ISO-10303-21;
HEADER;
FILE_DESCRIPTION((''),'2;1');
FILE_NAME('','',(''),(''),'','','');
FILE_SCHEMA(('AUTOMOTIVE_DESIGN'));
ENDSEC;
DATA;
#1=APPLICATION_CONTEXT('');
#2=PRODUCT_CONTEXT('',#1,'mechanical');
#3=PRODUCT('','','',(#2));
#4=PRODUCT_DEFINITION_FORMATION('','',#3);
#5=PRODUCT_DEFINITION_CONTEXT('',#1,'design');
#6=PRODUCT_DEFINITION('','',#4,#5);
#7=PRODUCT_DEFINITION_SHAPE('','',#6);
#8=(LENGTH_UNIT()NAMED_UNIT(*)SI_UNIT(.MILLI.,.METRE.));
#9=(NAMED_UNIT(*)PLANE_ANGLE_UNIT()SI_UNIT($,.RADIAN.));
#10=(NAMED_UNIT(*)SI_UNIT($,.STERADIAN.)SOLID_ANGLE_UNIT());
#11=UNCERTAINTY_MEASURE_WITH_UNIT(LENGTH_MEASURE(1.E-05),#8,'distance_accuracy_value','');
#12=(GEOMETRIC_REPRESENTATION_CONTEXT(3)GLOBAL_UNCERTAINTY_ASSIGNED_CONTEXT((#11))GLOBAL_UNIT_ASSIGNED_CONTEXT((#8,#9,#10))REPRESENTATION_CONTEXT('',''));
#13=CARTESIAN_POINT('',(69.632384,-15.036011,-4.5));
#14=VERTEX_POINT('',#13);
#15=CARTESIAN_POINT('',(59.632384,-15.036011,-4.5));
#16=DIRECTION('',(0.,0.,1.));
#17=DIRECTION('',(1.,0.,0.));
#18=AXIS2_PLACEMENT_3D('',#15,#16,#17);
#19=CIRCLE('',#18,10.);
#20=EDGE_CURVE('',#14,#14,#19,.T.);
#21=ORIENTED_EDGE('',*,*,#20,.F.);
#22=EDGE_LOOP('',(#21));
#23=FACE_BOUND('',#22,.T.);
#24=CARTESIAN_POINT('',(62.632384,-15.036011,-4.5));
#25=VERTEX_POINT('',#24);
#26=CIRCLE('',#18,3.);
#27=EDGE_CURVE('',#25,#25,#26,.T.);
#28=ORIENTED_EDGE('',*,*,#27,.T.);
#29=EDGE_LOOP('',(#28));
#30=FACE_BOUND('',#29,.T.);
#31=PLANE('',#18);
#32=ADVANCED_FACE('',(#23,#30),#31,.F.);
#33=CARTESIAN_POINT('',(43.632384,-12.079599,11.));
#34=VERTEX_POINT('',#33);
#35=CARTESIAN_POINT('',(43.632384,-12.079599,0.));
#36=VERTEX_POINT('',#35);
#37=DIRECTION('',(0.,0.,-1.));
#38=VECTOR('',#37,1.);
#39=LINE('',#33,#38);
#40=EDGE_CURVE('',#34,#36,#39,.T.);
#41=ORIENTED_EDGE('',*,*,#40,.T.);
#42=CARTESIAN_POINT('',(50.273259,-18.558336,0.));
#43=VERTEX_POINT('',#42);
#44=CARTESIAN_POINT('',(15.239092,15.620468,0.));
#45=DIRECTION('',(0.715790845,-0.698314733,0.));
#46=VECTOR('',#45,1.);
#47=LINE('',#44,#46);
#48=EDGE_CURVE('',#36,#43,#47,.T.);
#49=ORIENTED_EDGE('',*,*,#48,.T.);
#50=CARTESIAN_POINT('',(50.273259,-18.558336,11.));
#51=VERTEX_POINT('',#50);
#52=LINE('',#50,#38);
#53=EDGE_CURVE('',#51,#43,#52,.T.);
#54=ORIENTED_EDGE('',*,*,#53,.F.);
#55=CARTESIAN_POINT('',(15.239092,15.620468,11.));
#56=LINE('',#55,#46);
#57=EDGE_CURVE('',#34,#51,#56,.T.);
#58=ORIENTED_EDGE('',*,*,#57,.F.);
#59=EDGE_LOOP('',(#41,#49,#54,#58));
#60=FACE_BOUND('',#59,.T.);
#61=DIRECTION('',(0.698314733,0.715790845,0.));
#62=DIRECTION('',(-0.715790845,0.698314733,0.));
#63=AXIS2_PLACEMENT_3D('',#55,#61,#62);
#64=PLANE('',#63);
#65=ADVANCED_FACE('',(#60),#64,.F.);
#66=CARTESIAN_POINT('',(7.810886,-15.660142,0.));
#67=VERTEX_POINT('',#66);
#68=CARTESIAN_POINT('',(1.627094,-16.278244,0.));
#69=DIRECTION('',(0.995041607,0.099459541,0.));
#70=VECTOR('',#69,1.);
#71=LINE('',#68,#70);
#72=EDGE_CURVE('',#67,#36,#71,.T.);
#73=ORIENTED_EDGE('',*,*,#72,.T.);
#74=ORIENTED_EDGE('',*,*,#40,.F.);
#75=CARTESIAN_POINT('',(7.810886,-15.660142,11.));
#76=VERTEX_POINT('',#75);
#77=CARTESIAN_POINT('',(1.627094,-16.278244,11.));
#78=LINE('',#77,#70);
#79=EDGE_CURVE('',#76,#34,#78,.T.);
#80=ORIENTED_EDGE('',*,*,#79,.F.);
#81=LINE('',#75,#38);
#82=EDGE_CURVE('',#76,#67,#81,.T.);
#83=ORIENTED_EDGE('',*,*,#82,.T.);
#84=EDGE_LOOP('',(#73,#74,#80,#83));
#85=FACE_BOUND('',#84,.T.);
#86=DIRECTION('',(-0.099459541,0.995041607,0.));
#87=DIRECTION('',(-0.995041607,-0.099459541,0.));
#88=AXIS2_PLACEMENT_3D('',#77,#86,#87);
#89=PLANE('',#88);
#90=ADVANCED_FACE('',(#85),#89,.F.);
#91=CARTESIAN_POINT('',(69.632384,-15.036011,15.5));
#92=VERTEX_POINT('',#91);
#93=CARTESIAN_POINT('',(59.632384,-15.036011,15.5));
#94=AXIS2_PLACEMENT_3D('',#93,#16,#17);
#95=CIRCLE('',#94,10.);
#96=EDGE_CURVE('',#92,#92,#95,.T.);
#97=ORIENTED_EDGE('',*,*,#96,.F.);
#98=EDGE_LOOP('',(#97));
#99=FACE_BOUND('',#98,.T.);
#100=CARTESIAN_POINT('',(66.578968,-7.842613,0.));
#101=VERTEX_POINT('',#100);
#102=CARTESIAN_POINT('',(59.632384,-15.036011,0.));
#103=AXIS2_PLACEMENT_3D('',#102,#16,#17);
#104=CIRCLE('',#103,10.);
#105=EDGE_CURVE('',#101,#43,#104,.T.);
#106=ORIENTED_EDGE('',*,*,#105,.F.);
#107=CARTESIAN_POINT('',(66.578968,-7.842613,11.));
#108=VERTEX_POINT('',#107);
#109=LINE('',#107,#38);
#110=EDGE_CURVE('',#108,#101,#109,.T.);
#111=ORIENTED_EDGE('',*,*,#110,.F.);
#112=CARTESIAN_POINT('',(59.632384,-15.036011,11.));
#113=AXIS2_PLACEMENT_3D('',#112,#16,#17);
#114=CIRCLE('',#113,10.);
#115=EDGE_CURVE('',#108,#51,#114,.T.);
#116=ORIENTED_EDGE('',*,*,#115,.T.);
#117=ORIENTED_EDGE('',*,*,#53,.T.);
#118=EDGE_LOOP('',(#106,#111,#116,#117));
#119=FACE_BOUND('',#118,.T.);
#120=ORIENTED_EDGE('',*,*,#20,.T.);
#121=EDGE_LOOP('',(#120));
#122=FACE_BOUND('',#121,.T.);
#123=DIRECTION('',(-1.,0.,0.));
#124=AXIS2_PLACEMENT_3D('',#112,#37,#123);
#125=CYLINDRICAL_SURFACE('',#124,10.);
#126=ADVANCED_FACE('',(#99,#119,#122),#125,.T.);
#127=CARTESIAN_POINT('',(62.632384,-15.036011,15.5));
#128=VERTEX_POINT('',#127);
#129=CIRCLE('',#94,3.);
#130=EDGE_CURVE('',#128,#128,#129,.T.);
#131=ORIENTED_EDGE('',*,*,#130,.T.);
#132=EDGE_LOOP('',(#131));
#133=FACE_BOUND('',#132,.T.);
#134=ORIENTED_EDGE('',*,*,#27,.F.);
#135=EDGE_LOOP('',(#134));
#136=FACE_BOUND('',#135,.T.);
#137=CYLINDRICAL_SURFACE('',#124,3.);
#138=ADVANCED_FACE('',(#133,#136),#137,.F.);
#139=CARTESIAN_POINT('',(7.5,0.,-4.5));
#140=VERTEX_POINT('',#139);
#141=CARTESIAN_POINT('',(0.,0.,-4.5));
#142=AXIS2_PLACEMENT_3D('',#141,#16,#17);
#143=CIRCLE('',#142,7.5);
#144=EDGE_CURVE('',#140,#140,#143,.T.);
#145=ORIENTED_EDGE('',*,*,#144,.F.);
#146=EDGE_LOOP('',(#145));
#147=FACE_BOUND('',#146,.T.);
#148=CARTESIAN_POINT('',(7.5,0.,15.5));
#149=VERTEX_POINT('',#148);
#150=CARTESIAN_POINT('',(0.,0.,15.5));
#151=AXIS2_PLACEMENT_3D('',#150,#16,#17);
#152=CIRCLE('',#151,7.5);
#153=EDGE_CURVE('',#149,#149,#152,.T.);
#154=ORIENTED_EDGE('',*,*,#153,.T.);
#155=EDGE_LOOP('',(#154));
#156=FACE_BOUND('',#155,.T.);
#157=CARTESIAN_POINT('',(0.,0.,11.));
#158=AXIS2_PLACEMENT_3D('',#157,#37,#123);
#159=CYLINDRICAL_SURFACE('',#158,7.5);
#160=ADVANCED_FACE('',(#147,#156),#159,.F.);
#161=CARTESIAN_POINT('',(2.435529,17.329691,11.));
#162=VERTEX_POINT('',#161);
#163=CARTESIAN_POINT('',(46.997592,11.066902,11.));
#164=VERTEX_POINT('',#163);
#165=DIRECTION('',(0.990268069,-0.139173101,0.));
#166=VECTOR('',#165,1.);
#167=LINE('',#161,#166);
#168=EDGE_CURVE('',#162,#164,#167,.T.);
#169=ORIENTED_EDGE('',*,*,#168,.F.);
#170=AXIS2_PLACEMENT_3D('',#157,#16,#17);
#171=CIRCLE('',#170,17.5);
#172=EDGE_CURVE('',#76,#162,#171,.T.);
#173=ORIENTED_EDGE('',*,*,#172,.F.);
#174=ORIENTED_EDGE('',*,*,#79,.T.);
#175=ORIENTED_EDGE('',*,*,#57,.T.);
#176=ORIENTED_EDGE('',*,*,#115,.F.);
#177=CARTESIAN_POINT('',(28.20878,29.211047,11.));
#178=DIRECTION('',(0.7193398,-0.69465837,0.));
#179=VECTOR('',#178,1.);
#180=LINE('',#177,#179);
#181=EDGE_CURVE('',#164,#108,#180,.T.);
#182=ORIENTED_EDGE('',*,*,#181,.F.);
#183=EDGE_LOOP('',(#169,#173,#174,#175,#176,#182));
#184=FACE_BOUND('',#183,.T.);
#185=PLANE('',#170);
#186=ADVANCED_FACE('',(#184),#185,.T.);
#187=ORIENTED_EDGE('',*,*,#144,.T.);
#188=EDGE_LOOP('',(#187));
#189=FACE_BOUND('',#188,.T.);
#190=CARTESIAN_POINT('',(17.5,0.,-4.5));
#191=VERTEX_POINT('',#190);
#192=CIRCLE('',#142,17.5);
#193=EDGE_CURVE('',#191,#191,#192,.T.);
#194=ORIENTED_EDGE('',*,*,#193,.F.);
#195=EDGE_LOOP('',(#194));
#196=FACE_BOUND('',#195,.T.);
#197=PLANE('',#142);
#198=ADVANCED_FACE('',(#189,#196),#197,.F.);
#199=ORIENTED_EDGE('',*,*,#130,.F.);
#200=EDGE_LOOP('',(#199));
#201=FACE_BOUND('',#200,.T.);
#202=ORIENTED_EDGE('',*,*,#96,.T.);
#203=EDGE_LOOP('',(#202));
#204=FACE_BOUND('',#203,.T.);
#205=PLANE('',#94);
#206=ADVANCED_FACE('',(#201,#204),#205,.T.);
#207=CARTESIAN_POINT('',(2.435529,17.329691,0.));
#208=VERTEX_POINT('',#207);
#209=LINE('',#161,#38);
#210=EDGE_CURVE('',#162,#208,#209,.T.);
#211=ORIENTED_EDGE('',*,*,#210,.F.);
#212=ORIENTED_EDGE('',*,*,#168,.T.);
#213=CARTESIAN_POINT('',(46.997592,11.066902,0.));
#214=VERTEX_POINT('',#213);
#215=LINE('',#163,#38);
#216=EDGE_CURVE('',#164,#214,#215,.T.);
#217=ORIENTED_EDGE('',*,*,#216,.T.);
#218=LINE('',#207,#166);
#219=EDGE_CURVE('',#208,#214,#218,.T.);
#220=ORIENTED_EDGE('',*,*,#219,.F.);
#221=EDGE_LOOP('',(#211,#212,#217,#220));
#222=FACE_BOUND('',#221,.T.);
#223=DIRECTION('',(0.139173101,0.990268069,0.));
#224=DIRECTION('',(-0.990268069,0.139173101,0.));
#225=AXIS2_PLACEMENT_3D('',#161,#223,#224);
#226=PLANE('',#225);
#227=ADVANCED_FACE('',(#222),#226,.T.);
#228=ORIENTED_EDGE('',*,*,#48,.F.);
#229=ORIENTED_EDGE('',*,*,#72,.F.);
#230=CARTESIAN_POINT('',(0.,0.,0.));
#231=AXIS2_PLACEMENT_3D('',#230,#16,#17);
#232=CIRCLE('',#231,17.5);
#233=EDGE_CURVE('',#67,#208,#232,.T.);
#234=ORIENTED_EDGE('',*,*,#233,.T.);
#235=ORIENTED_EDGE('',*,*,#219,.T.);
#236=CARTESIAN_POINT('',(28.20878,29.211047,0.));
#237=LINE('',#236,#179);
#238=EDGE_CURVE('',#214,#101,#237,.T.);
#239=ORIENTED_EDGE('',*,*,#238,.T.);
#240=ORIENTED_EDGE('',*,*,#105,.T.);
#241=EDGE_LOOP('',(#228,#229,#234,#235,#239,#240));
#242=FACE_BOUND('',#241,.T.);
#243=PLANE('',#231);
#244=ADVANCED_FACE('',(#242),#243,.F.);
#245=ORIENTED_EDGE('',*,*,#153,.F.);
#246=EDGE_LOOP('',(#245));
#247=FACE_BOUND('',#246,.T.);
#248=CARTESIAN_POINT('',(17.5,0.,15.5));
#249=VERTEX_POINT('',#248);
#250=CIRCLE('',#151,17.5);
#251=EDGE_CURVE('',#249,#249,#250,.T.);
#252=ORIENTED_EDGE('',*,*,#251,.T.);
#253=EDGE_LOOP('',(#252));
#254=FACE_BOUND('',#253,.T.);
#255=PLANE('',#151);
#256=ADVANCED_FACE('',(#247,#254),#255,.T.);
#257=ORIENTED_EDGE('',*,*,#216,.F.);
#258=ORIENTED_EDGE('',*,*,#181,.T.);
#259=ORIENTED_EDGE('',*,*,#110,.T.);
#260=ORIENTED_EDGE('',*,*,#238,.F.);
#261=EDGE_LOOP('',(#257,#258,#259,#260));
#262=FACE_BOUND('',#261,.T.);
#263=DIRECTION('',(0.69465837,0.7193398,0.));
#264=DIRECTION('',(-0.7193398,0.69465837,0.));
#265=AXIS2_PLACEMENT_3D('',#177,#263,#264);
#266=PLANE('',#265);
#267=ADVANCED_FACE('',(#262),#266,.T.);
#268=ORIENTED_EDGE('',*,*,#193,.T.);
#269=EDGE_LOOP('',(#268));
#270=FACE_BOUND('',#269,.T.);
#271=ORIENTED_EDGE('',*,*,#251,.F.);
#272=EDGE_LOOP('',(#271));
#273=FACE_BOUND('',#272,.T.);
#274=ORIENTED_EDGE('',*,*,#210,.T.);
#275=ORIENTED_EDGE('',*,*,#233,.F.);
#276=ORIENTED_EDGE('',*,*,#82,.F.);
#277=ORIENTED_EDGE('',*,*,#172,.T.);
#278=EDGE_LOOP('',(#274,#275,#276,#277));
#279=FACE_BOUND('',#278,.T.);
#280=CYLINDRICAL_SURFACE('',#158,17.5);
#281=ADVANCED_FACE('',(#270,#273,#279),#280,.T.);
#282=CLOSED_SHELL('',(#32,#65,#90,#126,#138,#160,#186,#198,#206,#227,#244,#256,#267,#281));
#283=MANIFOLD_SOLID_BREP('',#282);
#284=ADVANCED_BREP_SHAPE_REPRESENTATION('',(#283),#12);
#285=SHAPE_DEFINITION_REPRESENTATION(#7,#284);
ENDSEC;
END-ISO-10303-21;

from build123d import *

# Parameters (mm, degrees)
ESQUISSE1_R             = 3
ESQUISSE1_R_2           = 7.5
BOSS_EXTRU_1_DEPTH      = 11
BOSS_EXTRU_2_DEPTH      = 15.5
BOSS_EXTRU_2_DEPTH_BACK = 4.5
ESQUISSE1_3_R           = 17.5
ESQUISSE1_3_R_2         = 7.5
ESQUISSE1_3_R_3         = 10
ESQUISSE1_3_R_4         = 3


with BuildPart() as part:
    # Esquisse1 → Boss.-Extru.1 (new body)
    with BuildSketch(Plane.XY):
        with BuildLine():
            Line((46.997592, 11.066902), (2.435529, 17.329691))
            ThreePointArc((2.435529, 17.329691), (-17.272219, -2.814332), (7.810886, -15.660142))
            Line((7.810886, -15.660142), (43.632384, -12.079599))
            Line((43.632384, -12.079599), (50.273259, -18.558336))
            ThreePointArc((50.273259, -18.558336), (65.124357, -23.392938), (66.578968, -7.842613))
            Line((66.578968, -7.842613), (46.997592, 11.066902))
        make_face()
        with Locations((59.632384, -15.036011)):
            Circle(ESQUISSE1_R, mode=Mode.SUBTRACT)
        Circle(ESQUISSE1_R_2, mode=Mode.SUBTRACT)
    extrude(amount=BOSS_EXTRU_1_DEPTH)

    # Esquisse1<3> → Boss.-Extru.2 (add, two sides: drawn at the far end of the back side and taken through both)
    # profile 1 of 2: a face of its own
    with BuildSketch(Plane.XY.offset(-BOSS_EXTRU_2_DEPTH_BACK)):
        Circle(ESQUISSE1_3_R)
        Circle(ESQUISSE1_3_R_2, mode=Mode.SUBTRACT)
    # profile 2 of 2: a face of its own
    with BuildSketch(Plane.XY.offset(-BOSS_EXTRU_2_DEPTH_BACK)):
        with Locations((59.632384, -15.036011)):
            Circle(ESQUISSE1_3_R_3)
        with Locations((59.632384, -15.036011)):
            Circle(ESQUISSE1_3_R_4, mode=Mode.SUBTRACT)
    extrude(amount=BOSS_EXTRU_2_DEPTH + BOSS_EXTRU_2_DEPTH_BACK)


solid = part.part
